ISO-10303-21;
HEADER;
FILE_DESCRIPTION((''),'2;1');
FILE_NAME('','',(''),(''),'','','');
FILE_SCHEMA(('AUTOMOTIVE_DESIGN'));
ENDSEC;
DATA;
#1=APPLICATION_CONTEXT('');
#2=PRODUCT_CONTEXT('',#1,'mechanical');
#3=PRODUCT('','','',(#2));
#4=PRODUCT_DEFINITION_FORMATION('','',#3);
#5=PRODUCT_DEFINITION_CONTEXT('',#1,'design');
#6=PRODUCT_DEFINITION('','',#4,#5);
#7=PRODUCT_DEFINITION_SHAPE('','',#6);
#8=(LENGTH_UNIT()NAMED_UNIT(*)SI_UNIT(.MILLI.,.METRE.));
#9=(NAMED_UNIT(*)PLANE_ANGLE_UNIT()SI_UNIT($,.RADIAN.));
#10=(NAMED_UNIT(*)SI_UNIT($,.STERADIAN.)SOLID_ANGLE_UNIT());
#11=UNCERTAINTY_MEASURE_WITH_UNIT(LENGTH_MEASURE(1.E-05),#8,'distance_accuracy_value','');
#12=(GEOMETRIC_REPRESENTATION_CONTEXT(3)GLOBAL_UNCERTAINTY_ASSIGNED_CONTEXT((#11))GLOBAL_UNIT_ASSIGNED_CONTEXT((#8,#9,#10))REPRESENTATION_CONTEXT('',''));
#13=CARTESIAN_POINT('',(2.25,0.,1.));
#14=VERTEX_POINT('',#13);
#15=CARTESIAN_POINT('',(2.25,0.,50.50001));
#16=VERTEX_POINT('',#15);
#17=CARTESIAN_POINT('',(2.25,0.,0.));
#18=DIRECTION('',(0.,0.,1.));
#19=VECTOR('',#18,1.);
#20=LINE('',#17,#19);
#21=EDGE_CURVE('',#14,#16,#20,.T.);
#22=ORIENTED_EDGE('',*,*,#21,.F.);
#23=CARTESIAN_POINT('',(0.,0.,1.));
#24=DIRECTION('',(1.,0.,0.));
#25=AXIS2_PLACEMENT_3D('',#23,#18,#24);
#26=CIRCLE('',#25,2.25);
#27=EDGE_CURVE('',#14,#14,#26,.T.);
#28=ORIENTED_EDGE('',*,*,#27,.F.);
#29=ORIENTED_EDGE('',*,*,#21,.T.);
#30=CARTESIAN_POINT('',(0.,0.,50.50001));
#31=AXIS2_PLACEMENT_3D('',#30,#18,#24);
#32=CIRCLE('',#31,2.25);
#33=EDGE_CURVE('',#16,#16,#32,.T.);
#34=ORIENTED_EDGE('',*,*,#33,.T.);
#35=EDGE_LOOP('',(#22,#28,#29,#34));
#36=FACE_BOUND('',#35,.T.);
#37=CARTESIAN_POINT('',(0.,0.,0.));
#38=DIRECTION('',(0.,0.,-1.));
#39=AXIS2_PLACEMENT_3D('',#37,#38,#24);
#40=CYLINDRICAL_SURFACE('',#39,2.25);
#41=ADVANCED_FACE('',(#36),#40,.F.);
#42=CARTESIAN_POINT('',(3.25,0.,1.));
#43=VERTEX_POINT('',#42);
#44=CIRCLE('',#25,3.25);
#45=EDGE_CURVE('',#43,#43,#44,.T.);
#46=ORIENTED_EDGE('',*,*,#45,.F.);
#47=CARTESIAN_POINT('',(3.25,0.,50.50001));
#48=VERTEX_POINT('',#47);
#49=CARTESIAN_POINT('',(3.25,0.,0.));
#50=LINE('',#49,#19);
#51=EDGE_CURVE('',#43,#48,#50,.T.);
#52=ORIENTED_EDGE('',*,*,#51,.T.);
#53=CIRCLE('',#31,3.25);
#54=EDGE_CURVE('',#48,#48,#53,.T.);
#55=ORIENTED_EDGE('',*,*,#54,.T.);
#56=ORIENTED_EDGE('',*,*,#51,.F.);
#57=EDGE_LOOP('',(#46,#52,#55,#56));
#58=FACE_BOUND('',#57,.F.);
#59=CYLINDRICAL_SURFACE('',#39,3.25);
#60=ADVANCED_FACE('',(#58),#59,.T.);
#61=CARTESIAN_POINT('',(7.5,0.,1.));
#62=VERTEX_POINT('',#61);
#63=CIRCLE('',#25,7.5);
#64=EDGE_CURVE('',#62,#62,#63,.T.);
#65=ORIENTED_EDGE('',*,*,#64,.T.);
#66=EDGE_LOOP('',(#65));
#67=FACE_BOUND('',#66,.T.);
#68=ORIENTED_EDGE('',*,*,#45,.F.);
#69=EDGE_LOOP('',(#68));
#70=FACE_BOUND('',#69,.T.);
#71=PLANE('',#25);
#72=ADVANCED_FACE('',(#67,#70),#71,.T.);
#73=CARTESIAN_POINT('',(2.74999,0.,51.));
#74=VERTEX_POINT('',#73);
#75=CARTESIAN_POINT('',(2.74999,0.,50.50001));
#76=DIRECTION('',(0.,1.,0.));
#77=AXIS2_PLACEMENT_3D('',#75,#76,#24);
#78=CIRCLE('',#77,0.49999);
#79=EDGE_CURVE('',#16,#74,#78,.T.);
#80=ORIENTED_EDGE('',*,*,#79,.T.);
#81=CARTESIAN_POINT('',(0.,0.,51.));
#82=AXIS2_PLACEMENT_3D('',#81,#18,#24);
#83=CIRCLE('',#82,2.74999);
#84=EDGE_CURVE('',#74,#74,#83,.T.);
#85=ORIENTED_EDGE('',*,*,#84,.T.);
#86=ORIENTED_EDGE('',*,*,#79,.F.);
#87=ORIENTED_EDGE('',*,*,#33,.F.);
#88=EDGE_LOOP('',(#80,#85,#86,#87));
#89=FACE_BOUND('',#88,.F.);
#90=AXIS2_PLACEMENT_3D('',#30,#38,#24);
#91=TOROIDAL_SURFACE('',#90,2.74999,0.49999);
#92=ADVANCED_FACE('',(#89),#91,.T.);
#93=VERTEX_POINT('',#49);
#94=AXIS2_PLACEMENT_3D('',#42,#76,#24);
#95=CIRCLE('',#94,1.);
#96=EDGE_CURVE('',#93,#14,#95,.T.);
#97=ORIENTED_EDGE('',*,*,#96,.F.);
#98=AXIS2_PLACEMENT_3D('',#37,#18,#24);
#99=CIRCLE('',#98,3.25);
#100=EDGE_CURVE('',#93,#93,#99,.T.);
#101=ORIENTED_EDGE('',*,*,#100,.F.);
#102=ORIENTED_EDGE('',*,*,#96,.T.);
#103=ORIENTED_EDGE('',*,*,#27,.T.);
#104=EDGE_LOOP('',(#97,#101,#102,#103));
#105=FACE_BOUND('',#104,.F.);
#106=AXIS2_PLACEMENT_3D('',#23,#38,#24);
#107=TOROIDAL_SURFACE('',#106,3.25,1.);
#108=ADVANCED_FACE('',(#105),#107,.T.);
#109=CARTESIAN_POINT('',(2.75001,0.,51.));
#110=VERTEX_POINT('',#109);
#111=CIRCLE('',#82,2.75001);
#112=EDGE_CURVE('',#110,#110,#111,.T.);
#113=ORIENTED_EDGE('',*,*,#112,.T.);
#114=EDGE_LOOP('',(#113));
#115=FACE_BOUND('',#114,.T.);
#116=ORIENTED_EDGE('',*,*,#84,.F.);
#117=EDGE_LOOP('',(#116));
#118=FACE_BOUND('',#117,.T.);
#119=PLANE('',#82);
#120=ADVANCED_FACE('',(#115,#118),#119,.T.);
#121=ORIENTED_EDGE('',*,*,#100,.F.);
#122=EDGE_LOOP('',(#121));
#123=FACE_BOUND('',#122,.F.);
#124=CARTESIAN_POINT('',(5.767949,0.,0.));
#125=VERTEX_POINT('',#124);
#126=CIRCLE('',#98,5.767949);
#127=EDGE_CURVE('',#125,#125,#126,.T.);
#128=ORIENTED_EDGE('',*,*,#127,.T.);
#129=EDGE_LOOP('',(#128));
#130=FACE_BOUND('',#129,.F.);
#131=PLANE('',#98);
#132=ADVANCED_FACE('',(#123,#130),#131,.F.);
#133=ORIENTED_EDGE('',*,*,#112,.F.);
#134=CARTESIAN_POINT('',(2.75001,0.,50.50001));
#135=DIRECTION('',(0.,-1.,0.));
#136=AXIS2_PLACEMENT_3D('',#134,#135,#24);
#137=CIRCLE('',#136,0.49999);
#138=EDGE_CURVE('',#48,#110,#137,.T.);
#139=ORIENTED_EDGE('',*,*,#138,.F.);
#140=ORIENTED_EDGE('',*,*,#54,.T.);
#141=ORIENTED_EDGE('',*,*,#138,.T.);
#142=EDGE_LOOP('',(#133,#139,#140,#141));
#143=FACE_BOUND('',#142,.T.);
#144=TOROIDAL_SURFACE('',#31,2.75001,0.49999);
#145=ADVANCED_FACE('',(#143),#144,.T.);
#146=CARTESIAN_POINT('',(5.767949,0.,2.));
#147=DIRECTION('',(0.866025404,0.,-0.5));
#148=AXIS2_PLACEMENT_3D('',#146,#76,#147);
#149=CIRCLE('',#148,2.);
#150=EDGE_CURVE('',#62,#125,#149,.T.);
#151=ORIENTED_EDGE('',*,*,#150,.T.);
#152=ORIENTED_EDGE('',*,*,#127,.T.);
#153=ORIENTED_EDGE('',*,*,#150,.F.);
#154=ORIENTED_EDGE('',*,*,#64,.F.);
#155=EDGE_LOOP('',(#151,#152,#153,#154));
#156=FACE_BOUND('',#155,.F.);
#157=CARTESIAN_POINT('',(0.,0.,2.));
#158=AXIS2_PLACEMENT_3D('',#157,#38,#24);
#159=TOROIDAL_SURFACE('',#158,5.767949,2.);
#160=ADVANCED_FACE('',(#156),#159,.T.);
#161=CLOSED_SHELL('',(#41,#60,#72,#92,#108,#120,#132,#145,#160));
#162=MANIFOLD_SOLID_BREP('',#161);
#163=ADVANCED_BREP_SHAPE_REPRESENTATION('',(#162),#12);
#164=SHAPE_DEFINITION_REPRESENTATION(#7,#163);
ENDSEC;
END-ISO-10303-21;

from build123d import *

# Parameters (mm, degrees)
F0_R     = 3.25
F0_R_2   = 2.25
F1_DEPTH = 51
F0_R_3   = 7.5
F2_DEPTH = 1
F3_R     = 0.49999
F5_R     = 1


# Not quite as in the source:
# - a fillet or chamfer that OpenCascade refuses, or shapes differently, is made with other operations: its cross-section is extruded or revolved along the edge and cut away or added
# - a fillet or chamfer is up to 0.001 mm smaller than in the source, because OpenCascade refuses the exact size


with BuildPart() as f1:
    # F0 (on Top) → F1 (new body)
    with BuildSketch(Plane.XY):
        Circle(F0_R)
        Circle(F0_R_2, mode=Mode.SUBTRACT)
    extrude(amount=F1_DEPTH)

    # F0 (on Top) → F2 (join)
    with BuildSketch(Plane.XY):
        Circle(F0_R_3)
        Circle(F0_R, mode=Mode.SUBTRACT)
    extrude(amount=F2_DEPTH)

    # F3 (radius 0.5 in the source; OpenCascade refuses exactly that, so slightly less here)
    f3_edges = [f1.edges().sort_by_distance(p)[0] for p in [
        (-3.25, 0, 51),
        (-2.25, 0, 51),
    ]]
    fillet(f3_edges, radius=F3_R)

    # F4: fillet of radius 2 on 1 edges, made by hand

    # F4_s1 → F4_t2 (revolve, cut)
    with BuildSketch(Plane.XZ):
        with BuildLine():
            ThreePointArc((7.5, 1), (6.7679491924, 0.2679491924), (5.7679491924, 0))
            Line((5.7679491924, 0), (7.5, 0))
            Line((7.5, 0), (7.5, 1))
        make_face()
    revolve(axis=Axis((0, 0, 0), (0, 0, 1)), mode=Mode.SUBTRACT)

    # F5
    f5_edges = [f1.edges().sort_by_distance(p)[0] for p in [
        (-2.25, 0, 0),
    ]]
    fillet(f5_edges, radius=F5_R)


solid = f1.part
